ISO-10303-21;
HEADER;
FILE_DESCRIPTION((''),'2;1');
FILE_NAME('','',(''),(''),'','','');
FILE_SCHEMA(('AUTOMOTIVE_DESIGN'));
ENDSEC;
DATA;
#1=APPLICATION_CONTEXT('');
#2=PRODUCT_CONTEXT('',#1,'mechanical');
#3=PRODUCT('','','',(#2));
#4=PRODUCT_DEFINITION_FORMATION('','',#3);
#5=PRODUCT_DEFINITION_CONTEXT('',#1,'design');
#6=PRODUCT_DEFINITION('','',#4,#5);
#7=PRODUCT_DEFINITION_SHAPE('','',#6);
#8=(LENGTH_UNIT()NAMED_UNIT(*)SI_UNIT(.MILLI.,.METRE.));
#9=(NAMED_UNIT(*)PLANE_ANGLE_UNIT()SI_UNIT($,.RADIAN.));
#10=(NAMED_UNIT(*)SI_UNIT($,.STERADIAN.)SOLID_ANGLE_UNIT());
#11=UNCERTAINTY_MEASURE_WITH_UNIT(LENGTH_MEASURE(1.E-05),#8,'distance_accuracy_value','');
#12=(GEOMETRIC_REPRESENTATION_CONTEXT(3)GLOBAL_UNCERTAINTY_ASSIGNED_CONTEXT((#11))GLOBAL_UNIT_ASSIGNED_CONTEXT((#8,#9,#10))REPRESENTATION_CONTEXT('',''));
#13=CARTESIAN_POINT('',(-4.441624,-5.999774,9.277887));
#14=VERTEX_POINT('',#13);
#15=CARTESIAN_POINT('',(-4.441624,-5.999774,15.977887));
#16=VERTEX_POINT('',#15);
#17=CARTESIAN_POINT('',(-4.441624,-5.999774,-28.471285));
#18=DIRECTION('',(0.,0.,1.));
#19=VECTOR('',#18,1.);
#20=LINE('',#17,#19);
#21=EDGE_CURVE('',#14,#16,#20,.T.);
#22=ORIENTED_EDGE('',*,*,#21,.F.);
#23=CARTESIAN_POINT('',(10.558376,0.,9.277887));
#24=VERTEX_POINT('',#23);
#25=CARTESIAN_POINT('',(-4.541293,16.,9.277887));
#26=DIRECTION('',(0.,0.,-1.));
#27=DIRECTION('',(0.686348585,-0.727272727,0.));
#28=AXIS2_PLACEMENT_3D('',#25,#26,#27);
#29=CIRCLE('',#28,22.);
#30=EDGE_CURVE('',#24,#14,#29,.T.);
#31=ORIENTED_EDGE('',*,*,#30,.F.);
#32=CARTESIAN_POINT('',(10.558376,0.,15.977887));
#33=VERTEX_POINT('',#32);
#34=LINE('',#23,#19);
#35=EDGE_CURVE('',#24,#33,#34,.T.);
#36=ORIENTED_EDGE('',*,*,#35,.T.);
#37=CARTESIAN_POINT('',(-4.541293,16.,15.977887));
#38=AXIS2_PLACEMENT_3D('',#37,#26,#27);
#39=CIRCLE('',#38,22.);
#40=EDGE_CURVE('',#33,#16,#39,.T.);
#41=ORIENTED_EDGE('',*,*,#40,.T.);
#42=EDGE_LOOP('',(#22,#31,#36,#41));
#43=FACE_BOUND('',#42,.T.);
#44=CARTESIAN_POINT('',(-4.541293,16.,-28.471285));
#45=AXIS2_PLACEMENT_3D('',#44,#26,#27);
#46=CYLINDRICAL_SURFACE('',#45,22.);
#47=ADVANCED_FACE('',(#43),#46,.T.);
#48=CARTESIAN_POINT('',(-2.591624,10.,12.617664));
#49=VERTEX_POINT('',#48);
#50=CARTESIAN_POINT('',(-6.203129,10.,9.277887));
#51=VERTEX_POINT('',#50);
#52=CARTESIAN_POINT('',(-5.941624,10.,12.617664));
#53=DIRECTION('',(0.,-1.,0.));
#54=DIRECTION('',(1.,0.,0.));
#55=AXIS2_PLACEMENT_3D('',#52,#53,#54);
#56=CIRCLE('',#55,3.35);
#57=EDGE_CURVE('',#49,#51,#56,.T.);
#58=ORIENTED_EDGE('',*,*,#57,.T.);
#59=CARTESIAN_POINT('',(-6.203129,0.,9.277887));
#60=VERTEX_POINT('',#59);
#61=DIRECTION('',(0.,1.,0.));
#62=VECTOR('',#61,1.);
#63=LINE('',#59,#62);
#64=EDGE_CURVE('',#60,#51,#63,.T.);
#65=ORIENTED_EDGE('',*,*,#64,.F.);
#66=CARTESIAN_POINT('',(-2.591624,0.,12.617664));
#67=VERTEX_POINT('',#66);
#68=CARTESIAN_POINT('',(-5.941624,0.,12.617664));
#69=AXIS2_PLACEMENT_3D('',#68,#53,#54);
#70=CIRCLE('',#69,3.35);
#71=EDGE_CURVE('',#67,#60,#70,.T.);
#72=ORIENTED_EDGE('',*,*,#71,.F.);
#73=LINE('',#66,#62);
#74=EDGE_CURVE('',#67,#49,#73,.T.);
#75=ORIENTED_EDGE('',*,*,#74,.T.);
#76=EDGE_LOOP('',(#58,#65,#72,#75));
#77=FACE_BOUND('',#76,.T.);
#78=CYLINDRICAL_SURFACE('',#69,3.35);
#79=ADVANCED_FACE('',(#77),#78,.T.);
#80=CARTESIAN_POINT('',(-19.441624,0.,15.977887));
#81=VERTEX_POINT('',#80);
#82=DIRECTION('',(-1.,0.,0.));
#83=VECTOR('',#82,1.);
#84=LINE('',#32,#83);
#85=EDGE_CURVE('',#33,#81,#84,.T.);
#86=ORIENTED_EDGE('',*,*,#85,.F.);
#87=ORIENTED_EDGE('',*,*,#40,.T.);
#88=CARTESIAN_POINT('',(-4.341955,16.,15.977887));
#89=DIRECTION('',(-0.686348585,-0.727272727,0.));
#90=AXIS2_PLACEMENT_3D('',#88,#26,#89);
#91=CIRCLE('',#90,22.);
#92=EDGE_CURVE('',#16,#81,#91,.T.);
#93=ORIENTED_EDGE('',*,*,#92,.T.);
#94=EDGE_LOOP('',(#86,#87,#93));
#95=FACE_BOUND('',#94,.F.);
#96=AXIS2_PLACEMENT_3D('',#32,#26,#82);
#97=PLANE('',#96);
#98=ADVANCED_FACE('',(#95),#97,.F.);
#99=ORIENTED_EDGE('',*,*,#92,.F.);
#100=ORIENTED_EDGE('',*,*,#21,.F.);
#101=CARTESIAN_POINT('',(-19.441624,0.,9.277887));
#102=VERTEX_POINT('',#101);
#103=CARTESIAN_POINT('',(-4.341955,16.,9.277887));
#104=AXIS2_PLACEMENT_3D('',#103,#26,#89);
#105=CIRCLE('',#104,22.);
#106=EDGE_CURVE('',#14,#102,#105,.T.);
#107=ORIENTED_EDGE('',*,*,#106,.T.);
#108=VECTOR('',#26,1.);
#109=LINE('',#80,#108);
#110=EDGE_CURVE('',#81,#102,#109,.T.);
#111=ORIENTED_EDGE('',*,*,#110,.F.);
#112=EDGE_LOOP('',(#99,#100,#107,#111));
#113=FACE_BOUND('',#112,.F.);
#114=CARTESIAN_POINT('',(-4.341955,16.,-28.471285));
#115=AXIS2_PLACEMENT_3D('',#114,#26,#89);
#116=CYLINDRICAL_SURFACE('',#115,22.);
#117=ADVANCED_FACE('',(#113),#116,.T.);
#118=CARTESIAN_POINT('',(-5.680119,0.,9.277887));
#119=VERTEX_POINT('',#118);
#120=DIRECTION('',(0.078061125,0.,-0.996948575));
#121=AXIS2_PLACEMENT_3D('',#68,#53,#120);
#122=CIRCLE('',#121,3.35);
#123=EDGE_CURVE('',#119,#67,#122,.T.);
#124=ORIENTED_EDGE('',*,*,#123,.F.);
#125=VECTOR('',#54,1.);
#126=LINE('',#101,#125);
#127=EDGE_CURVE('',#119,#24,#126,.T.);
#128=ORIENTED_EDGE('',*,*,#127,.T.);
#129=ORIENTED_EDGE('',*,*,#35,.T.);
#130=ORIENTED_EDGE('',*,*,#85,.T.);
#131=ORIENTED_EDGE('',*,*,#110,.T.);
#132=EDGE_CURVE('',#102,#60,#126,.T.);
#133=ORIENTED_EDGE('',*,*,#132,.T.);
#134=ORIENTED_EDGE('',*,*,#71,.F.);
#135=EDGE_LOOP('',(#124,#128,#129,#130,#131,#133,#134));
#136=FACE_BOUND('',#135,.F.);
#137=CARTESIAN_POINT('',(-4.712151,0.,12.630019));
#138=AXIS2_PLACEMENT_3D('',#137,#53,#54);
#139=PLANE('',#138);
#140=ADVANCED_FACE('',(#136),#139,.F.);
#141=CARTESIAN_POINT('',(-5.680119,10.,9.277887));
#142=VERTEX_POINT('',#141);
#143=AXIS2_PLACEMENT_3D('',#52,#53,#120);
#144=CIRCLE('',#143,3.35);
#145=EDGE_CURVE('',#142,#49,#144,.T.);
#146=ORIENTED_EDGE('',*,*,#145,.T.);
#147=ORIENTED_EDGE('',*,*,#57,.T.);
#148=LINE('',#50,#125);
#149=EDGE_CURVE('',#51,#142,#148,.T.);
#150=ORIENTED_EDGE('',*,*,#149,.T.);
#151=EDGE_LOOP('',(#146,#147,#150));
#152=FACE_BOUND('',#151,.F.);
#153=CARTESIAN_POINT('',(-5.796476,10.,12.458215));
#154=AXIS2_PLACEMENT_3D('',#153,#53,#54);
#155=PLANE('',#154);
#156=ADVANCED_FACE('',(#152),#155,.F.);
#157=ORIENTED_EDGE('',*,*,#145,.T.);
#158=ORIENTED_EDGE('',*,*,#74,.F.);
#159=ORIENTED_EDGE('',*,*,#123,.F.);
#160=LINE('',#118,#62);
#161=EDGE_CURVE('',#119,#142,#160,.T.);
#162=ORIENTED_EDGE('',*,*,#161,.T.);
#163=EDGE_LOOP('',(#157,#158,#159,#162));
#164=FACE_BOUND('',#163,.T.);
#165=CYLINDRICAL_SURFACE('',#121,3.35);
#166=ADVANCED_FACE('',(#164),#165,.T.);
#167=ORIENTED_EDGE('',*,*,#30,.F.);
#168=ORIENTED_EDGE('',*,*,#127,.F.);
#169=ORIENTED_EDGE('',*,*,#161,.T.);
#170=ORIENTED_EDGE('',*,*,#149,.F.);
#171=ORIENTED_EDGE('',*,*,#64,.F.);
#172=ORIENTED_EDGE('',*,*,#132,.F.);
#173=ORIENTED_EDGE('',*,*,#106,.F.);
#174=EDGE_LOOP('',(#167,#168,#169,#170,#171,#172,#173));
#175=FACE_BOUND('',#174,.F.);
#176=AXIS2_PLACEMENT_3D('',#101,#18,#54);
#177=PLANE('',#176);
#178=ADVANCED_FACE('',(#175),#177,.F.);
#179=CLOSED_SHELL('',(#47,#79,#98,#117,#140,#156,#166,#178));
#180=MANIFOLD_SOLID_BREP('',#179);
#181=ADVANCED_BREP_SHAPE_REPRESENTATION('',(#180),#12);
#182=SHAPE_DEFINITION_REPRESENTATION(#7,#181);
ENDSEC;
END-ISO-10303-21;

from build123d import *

# Parameters (mm, degrees)
F1_DEPTH    = 6
F2_DEPTH    = 10
F3_T1_DEPTH = 82.1983443527


# Not quite as in the source:
# - a fillet or chamfer that OpenCascade refuses, or shapes differently, is made with other operations: its cross-section is extruded or revolved along the edge and cut away or added


with BuildPart() as f1:
    # F0 (on Front) → F1 (new body)
    with BuildSketch(Plane.XZ):
        with BuildLine():
            Line((10.5583761781, 15.9778866861), (-19.4416238219, 15.9778866861))
            Line((-19.4416238219, 15.9778866861), (-19.4416238219, 9.2778866861))
            Line((-19.4416238219, 9.2778866861), (-6.2031285903, 9.2778866861))
            ThreePointArc((-6.2031285903, 9.2778866861), (-8.2160972802, 15.0771908879), (-2.5916238219, 12.6176644117))
            ThreePointArc((-2.5916238219, 12.6176644117), (-3.4820973456, 10.3431909533), (-5.6801190534, 9.2778866861))
            Line((-5.6801190534, 9.2778866861), (10.5583761781, 9.2778866861))
            Line((10.5583761781, 9.2778866861), (10.5583761781, 15.9778866861))
        make_face()
        with BuildLine():
            ThreePointArc((-2.5916238219, 12.6176644117), (-8.2160972802, 15.0771908879), (-6.2031285903, 9.2778866861))
            Line((-6.2031285903, 9.2778866861), (-5.6801190534, 9.2778866861))
            ThreePointArc((-5.6801190534, 9.2778866861), (-3.4820973456, 10.3431909533), (-2.5916238219, 12.6176644117))
        make_face()
    extrude(amount=F1_DEPTH)

    # F0 (on Front) → F2 (join)
    with BuildSketch(Plane.XZ):
        with BuildLine():
            ThreePointArc((-2.5916238219, 12.6176644117), (-8.2160972802, 15.0771908879), (-6.2031285903, 9.2778866861))
            Line((-6.2031285903, 9.2778866861), (-5.6801190534, 9.2778866861))
            ThreePointArc((-5.6801190534, 9.2778866861), (-3.4820973456, 10.3431909533), (-2.5916238219, 12.6176644117))
        make_face()
    extrude(amount=-F2_DEPTH)

    # F3: fillet of radius 22 on 2 edges, made by hand

    # F3_s2 → F3_t1 (cut)
    with BuildSketch(Plane.XY.offset(-28.4712854902)):
        with BuildLine():
            ThreePointArc((-19.4416238219, 0), (-12.4659933559, -4.4450483003), (-4.3419549513, -6))
            Line((-4.3419549513, -6), (-19.4416238219, -6))
            Line((-19.4416238219, -6), (-19.4416238219, 0))
        make_face()
        with BuildLine():
            ThreePointArc((10.5583761781, 0), (3.5827457122, -4.4450483003), (-4.5412926924, -6))
            Line((-4.5412926924, -6), (10.5583761781, -6))
            Line((10.5583761781, -6), (10.5583761781, 0))
        make_face()
    extrude(amount=F3_T1_DEPTH, mode=Mode.SUBTRACT)


solid = f1.part
